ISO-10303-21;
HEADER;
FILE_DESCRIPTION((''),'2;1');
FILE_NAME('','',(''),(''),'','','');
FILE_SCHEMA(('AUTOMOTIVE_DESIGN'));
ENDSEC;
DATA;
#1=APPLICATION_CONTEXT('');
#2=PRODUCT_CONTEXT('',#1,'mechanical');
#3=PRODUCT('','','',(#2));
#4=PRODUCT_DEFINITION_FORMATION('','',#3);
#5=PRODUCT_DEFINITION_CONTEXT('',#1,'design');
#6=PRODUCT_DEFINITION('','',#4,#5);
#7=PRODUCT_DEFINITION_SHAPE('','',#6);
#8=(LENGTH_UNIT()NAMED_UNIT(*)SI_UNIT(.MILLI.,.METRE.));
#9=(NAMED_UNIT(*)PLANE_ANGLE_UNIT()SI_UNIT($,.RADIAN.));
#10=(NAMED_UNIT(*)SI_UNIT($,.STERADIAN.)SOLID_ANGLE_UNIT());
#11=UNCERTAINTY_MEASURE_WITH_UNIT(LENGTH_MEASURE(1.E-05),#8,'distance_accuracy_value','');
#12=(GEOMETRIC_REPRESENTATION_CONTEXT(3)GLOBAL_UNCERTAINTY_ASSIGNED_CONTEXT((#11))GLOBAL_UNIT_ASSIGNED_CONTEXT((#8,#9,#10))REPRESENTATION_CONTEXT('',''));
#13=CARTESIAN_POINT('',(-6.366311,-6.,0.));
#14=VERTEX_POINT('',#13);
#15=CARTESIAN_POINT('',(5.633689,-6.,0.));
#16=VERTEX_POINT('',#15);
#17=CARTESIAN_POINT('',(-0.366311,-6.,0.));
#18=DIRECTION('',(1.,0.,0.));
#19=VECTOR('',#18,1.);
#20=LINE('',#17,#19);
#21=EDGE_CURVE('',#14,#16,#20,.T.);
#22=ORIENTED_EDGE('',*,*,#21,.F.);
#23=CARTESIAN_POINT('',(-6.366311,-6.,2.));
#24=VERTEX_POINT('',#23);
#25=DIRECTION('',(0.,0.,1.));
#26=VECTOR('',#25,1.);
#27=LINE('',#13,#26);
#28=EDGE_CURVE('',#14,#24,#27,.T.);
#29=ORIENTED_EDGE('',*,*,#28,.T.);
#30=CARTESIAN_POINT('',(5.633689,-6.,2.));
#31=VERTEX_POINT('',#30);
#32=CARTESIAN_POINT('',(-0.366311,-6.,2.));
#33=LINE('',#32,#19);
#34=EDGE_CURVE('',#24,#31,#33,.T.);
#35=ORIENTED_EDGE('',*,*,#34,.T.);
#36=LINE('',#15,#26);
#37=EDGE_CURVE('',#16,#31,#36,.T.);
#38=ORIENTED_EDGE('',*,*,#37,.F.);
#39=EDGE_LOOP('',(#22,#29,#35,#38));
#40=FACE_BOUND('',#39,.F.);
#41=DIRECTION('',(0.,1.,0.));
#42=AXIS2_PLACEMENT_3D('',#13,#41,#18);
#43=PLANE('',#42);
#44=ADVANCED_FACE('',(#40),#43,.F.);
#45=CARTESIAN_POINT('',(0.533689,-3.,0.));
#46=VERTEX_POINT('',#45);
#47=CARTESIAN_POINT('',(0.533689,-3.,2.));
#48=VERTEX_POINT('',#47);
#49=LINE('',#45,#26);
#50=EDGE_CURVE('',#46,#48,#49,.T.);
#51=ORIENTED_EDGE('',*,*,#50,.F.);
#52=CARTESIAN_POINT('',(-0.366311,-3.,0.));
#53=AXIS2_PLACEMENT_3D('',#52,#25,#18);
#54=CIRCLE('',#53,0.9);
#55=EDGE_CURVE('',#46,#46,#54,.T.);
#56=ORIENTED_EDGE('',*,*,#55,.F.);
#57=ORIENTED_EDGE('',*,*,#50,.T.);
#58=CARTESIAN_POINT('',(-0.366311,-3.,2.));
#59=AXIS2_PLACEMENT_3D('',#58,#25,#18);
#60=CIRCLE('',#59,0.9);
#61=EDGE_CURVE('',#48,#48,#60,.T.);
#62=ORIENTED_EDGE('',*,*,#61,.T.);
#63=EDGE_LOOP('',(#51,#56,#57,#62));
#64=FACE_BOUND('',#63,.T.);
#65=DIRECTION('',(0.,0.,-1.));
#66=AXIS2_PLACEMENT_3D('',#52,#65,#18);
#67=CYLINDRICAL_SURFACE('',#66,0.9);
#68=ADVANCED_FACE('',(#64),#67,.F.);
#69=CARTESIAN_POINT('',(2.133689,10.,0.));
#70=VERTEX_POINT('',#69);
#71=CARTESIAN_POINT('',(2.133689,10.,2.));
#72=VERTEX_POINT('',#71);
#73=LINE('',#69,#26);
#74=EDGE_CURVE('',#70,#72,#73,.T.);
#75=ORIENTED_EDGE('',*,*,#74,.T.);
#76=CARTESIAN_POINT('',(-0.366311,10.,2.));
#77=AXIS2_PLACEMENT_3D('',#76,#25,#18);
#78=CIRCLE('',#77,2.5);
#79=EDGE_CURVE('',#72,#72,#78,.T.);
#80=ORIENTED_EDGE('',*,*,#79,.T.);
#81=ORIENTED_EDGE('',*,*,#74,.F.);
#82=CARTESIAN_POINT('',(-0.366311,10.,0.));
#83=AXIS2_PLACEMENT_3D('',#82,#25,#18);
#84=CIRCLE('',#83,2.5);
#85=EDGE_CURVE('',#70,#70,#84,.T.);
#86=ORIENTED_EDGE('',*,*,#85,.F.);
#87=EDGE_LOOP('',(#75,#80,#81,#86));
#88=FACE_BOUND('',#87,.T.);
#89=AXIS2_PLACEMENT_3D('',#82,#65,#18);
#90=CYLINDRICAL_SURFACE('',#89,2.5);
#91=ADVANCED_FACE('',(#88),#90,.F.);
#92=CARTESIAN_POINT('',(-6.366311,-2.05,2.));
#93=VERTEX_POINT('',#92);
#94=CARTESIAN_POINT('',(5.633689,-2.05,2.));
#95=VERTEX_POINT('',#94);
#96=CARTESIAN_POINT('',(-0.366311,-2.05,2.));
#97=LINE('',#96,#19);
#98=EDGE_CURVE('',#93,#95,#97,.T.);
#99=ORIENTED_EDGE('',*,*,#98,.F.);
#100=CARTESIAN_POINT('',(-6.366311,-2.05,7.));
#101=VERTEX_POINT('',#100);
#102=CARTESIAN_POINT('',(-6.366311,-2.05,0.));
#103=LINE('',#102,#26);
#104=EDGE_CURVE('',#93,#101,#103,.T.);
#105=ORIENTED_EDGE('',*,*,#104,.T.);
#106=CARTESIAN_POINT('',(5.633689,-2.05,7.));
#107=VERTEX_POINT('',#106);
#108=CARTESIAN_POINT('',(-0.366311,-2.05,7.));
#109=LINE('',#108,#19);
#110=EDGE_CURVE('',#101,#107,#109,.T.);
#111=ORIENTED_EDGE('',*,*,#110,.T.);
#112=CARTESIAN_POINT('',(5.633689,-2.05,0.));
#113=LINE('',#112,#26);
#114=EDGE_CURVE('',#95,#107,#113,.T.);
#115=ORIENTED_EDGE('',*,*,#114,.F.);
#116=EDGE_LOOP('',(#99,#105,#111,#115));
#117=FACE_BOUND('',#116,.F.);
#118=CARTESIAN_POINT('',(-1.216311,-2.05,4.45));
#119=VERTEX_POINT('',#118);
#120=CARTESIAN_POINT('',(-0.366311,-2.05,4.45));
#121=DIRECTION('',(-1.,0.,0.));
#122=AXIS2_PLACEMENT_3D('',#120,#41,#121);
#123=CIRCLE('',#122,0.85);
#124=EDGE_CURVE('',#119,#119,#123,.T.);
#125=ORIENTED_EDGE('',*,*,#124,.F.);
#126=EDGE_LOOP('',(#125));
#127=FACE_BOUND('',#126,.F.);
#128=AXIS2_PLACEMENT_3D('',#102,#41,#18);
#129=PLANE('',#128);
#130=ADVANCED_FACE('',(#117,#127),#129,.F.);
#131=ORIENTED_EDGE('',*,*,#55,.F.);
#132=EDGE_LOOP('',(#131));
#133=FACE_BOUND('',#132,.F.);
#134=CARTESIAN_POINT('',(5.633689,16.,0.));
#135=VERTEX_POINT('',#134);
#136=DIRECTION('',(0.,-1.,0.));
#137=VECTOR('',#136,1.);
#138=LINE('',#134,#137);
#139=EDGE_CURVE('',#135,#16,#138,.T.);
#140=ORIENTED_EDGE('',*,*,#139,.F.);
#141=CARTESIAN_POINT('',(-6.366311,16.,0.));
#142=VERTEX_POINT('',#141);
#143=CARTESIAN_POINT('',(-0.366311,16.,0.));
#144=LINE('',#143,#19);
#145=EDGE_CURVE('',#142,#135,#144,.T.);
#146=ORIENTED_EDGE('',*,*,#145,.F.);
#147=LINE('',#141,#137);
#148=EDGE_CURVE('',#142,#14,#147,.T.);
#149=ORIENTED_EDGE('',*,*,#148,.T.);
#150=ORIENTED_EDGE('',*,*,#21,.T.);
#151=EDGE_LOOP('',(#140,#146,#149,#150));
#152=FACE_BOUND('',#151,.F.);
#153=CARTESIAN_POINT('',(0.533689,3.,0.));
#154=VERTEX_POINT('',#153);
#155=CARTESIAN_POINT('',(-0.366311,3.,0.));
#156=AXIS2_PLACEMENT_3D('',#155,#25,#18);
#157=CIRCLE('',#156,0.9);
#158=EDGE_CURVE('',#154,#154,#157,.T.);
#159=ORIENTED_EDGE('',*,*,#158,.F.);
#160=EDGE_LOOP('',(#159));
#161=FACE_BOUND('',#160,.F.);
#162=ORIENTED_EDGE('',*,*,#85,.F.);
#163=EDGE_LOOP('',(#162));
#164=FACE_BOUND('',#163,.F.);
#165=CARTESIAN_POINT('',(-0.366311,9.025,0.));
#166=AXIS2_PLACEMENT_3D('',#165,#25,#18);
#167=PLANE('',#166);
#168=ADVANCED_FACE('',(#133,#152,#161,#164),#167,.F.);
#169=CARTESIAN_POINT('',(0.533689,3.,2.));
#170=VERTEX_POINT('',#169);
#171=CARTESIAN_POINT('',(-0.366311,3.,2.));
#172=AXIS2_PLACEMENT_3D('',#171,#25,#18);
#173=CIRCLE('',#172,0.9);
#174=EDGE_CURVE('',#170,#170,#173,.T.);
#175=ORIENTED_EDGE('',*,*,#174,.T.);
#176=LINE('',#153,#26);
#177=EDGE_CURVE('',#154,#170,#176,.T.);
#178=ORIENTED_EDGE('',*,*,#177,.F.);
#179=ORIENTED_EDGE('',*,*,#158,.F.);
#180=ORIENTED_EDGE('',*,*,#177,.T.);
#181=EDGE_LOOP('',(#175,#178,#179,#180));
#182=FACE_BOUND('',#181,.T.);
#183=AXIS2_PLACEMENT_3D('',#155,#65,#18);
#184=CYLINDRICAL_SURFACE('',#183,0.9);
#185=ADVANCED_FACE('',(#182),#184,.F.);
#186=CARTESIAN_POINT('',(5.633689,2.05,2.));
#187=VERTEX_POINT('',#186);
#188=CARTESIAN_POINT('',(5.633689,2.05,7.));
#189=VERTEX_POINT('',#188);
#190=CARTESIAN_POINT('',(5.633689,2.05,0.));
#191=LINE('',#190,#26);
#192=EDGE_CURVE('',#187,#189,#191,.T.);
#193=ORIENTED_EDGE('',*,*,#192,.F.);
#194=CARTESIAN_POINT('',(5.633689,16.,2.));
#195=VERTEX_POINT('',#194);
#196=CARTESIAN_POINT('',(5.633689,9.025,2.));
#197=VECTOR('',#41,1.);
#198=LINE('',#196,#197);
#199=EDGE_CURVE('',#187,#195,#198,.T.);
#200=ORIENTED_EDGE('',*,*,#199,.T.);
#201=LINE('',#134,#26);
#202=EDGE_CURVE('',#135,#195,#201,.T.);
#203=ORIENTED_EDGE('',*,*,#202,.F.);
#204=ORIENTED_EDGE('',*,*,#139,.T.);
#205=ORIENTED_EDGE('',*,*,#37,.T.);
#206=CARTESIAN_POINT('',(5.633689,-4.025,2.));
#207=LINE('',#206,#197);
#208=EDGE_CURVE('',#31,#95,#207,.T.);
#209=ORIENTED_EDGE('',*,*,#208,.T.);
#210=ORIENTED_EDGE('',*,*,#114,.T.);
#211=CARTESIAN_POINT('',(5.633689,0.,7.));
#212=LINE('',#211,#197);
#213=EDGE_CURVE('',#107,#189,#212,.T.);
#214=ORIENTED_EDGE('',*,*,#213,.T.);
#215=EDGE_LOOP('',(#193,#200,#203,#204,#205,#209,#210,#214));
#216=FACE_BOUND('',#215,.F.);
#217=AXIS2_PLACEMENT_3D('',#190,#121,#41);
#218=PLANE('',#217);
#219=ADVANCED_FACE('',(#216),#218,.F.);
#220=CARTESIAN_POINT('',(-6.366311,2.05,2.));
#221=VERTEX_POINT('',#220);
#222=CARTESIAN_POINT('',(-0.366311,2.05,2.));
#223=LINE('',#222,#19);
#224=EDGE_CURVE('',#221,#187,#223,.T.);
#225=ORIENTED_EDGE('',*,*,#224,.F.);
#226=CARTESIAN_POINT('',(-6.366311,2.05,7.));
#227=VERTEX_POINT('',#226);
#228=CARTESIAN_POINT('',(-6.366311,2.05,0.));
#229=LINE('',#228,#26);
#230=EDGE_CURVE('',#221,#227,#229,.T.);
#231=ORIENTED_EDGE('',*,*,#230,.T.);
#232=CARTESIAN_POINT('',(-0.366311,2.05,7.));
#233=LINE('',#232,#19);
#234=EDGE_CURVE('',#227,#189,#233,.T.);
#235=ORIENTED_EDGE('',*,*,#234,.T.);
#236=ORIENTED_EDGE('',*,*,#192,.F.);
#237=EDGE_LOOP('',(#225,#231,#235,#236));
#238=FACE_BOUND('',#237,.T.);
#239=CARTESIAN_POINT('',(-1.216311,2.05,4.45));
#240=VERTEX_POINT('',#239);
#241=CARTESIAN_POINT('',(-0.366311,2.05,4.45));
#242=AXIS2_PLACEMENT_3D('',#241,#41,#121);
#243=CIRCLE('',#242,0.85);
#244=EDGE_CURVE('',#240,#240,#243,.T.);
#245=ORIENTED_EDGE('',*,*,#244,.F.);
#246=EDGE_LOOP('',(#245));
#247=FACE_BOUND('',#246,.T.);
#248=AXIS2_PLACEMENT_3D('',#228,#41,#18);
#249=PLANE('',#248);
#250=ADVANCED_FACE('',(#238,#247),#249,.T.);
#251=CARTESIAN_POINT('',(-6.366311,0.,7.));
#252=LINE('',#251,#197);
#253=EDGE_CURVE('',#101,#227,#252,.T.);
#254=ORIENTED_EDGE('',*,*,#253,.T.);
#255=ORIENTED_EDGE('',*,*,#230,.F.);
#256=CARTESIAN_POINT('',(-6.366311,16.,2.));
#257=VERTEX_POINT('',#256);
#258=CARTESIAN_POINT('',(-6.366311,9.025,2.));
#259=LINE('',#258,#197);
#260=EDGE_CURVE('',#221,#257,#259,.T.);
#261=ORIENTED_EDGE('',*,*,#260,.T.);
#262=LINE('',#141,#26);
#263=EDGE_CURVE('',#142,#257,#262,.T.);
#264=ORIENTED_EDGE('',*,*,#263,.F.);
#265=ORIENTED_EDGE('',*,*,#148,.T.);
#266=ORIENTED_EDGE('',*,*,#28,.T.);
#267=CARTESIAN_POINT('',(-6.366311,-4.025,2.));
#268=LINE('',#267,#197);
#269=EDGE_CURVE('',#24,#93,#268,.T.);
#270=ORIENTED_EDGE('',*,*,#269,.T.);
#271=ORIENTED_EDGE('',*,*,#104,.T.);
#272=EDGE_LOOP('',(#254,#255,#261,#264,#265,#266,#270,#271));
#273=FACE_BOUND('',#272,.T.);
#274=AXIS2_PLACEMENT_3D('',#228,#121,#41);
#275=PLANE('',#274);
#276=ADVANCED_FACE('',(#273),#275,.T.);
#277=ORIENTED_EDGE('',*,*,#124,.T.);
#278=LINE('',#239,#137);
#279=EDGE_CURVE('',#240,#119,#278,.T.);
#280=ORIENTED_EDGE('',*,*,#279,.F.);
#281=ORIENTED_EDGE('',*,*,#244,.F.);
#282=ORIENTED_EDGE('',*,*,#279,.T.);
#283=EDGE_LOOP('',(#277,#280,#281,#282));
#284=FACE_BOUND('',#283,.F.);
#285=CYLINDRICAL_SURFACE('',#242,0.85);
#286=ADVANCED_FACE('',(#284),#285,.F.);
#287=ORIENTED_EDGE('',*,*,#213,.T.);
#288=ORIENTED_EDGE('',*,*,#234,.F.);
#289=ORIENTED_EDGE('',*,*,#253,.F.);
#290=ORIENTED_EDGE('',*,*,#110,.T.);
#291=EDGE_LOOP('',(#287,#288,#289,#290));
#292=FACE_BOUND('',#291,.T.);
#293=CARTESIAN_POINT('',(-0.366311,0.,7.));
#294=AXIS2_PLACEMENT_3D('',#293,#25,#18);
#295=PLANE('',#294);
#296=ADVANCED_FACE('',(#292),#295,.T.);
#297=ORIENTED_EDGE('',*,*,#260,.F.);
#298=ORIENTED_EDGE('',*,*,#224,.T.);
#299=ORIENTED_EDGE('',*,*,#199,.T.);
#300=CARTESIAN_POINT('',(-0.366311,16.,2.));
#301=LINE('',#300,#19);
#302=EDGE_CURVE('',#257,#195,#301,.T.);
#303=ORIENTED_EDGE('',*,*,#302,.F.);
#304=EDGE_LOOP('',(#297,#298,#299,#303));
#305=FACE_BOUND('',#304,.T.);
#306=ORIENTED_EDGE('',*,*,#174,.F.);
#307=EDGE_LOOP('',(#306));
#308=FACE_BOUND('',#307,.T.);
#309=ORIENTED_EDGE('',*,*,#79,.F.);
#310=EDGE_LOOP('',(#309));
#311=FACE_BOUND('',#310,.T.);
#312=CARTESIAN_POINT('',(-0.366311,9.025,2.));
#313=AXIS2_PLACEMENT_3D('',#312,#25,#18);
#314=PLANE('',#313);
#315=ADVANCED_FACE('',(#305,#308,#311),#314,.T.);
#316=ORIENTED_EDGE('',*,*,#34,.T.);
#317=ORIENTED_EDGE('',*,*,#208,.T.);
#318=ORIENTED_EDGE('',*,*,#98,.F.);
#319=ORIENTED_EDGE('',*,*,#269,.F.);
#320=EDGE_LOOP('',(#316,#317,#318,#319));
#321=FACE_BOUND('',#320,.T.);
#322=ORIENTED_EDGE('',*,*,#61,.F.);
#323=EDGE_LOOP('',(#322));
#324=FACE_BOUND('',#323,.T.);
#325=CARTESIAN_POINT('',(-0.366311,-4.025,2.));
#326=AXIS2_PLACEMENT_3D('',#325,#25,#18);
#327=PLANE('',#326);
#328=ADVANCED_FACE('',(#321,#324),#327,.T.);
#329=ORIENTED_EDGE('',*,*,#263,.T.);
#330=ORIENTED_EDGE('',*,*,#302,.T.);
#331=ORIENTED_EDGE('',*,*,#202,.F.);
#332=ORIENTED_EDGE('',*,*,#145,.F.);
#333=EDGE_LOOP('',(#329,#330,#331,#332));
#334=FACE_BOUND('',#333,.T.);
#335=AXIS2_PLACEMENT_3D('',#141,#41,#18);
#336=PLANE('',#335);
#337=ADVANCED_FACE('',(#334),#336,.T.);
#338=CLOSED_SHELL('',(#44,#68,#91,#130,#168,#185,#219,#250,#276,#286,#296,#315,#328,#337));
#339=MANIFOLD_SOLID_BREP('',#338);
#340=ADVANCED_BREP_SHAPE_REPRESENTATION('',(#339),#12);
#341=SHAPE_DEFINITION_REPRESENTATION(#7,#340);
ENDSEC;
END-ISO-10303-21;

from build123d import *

# Parameters (mm, degrees)
F0_W     = 12
F0_H     = 4.1
F1_DEPTH = 7
F0_H_2   = 13.95
F0_R     = 0.9
F0_R_2   = 4
F0_H_3   = 3.95
F0_R_3   = 2.5
F2_DEPTH = 2
F4_R     = 0.85
F5_DEPTH = 5


# Not quite as in the source:
# - a feature of the source that left no trace in its solid (it failed there, or was rolled back) is left out


with BuildPart() as f1:
    # F0 (on Top) → F1 (new body)
    with BuildSketch(Plane.XY):
        with Locations((-0.3663106412, 0)):
            Rectangle(F0_W, F0_H)
    extrude(amount=F1_DEPTH)

    # F0 (on Top) → F2 (join)
    with BuildSketch(Plane.XY):
        with Locations((-0.3663106412, 9.025)):
            Rectangle(F0_W, F0_H_2)
        with Locations((-0.3663106412, 3)):
            Circle(F0_R, mode=Mode.SUBTRACT)
        with Locations((-0.3663106412, 10)):
            Circle(F0_R_2, mode=Mode.SUBTRACT)
        with Locations((-0.3663106412, -4.025)):
            Rectangle(F0_W, F0_H_3)
        with Locations((-0.3663106412, -3)):
            Circle(F0_R, mode=Mode.SUBTRACT)
        with Locations((-0.3663106412, 10)):
            Circle(F0_R_2)
        with Locations((-0.3663106412, 10)):
            Circle(F0_R_3, mode=Mode.SUBTRACT)
    extrude(amount=F2_DEPTH)

    # F4 (on face) → F5 (cut)
    with BuildSketch(Plane(origin=(0, 2.05, 0), x_dir=(-1, 0, 0), z_dir=(0, 1, 0))):
        with Locations((0.3663106412, 4.45)):
            Circle(F4_R)
    extrude(amount=-F5_DEPTH, mode=Mode.SUBTRACT)


solid = f1.part
